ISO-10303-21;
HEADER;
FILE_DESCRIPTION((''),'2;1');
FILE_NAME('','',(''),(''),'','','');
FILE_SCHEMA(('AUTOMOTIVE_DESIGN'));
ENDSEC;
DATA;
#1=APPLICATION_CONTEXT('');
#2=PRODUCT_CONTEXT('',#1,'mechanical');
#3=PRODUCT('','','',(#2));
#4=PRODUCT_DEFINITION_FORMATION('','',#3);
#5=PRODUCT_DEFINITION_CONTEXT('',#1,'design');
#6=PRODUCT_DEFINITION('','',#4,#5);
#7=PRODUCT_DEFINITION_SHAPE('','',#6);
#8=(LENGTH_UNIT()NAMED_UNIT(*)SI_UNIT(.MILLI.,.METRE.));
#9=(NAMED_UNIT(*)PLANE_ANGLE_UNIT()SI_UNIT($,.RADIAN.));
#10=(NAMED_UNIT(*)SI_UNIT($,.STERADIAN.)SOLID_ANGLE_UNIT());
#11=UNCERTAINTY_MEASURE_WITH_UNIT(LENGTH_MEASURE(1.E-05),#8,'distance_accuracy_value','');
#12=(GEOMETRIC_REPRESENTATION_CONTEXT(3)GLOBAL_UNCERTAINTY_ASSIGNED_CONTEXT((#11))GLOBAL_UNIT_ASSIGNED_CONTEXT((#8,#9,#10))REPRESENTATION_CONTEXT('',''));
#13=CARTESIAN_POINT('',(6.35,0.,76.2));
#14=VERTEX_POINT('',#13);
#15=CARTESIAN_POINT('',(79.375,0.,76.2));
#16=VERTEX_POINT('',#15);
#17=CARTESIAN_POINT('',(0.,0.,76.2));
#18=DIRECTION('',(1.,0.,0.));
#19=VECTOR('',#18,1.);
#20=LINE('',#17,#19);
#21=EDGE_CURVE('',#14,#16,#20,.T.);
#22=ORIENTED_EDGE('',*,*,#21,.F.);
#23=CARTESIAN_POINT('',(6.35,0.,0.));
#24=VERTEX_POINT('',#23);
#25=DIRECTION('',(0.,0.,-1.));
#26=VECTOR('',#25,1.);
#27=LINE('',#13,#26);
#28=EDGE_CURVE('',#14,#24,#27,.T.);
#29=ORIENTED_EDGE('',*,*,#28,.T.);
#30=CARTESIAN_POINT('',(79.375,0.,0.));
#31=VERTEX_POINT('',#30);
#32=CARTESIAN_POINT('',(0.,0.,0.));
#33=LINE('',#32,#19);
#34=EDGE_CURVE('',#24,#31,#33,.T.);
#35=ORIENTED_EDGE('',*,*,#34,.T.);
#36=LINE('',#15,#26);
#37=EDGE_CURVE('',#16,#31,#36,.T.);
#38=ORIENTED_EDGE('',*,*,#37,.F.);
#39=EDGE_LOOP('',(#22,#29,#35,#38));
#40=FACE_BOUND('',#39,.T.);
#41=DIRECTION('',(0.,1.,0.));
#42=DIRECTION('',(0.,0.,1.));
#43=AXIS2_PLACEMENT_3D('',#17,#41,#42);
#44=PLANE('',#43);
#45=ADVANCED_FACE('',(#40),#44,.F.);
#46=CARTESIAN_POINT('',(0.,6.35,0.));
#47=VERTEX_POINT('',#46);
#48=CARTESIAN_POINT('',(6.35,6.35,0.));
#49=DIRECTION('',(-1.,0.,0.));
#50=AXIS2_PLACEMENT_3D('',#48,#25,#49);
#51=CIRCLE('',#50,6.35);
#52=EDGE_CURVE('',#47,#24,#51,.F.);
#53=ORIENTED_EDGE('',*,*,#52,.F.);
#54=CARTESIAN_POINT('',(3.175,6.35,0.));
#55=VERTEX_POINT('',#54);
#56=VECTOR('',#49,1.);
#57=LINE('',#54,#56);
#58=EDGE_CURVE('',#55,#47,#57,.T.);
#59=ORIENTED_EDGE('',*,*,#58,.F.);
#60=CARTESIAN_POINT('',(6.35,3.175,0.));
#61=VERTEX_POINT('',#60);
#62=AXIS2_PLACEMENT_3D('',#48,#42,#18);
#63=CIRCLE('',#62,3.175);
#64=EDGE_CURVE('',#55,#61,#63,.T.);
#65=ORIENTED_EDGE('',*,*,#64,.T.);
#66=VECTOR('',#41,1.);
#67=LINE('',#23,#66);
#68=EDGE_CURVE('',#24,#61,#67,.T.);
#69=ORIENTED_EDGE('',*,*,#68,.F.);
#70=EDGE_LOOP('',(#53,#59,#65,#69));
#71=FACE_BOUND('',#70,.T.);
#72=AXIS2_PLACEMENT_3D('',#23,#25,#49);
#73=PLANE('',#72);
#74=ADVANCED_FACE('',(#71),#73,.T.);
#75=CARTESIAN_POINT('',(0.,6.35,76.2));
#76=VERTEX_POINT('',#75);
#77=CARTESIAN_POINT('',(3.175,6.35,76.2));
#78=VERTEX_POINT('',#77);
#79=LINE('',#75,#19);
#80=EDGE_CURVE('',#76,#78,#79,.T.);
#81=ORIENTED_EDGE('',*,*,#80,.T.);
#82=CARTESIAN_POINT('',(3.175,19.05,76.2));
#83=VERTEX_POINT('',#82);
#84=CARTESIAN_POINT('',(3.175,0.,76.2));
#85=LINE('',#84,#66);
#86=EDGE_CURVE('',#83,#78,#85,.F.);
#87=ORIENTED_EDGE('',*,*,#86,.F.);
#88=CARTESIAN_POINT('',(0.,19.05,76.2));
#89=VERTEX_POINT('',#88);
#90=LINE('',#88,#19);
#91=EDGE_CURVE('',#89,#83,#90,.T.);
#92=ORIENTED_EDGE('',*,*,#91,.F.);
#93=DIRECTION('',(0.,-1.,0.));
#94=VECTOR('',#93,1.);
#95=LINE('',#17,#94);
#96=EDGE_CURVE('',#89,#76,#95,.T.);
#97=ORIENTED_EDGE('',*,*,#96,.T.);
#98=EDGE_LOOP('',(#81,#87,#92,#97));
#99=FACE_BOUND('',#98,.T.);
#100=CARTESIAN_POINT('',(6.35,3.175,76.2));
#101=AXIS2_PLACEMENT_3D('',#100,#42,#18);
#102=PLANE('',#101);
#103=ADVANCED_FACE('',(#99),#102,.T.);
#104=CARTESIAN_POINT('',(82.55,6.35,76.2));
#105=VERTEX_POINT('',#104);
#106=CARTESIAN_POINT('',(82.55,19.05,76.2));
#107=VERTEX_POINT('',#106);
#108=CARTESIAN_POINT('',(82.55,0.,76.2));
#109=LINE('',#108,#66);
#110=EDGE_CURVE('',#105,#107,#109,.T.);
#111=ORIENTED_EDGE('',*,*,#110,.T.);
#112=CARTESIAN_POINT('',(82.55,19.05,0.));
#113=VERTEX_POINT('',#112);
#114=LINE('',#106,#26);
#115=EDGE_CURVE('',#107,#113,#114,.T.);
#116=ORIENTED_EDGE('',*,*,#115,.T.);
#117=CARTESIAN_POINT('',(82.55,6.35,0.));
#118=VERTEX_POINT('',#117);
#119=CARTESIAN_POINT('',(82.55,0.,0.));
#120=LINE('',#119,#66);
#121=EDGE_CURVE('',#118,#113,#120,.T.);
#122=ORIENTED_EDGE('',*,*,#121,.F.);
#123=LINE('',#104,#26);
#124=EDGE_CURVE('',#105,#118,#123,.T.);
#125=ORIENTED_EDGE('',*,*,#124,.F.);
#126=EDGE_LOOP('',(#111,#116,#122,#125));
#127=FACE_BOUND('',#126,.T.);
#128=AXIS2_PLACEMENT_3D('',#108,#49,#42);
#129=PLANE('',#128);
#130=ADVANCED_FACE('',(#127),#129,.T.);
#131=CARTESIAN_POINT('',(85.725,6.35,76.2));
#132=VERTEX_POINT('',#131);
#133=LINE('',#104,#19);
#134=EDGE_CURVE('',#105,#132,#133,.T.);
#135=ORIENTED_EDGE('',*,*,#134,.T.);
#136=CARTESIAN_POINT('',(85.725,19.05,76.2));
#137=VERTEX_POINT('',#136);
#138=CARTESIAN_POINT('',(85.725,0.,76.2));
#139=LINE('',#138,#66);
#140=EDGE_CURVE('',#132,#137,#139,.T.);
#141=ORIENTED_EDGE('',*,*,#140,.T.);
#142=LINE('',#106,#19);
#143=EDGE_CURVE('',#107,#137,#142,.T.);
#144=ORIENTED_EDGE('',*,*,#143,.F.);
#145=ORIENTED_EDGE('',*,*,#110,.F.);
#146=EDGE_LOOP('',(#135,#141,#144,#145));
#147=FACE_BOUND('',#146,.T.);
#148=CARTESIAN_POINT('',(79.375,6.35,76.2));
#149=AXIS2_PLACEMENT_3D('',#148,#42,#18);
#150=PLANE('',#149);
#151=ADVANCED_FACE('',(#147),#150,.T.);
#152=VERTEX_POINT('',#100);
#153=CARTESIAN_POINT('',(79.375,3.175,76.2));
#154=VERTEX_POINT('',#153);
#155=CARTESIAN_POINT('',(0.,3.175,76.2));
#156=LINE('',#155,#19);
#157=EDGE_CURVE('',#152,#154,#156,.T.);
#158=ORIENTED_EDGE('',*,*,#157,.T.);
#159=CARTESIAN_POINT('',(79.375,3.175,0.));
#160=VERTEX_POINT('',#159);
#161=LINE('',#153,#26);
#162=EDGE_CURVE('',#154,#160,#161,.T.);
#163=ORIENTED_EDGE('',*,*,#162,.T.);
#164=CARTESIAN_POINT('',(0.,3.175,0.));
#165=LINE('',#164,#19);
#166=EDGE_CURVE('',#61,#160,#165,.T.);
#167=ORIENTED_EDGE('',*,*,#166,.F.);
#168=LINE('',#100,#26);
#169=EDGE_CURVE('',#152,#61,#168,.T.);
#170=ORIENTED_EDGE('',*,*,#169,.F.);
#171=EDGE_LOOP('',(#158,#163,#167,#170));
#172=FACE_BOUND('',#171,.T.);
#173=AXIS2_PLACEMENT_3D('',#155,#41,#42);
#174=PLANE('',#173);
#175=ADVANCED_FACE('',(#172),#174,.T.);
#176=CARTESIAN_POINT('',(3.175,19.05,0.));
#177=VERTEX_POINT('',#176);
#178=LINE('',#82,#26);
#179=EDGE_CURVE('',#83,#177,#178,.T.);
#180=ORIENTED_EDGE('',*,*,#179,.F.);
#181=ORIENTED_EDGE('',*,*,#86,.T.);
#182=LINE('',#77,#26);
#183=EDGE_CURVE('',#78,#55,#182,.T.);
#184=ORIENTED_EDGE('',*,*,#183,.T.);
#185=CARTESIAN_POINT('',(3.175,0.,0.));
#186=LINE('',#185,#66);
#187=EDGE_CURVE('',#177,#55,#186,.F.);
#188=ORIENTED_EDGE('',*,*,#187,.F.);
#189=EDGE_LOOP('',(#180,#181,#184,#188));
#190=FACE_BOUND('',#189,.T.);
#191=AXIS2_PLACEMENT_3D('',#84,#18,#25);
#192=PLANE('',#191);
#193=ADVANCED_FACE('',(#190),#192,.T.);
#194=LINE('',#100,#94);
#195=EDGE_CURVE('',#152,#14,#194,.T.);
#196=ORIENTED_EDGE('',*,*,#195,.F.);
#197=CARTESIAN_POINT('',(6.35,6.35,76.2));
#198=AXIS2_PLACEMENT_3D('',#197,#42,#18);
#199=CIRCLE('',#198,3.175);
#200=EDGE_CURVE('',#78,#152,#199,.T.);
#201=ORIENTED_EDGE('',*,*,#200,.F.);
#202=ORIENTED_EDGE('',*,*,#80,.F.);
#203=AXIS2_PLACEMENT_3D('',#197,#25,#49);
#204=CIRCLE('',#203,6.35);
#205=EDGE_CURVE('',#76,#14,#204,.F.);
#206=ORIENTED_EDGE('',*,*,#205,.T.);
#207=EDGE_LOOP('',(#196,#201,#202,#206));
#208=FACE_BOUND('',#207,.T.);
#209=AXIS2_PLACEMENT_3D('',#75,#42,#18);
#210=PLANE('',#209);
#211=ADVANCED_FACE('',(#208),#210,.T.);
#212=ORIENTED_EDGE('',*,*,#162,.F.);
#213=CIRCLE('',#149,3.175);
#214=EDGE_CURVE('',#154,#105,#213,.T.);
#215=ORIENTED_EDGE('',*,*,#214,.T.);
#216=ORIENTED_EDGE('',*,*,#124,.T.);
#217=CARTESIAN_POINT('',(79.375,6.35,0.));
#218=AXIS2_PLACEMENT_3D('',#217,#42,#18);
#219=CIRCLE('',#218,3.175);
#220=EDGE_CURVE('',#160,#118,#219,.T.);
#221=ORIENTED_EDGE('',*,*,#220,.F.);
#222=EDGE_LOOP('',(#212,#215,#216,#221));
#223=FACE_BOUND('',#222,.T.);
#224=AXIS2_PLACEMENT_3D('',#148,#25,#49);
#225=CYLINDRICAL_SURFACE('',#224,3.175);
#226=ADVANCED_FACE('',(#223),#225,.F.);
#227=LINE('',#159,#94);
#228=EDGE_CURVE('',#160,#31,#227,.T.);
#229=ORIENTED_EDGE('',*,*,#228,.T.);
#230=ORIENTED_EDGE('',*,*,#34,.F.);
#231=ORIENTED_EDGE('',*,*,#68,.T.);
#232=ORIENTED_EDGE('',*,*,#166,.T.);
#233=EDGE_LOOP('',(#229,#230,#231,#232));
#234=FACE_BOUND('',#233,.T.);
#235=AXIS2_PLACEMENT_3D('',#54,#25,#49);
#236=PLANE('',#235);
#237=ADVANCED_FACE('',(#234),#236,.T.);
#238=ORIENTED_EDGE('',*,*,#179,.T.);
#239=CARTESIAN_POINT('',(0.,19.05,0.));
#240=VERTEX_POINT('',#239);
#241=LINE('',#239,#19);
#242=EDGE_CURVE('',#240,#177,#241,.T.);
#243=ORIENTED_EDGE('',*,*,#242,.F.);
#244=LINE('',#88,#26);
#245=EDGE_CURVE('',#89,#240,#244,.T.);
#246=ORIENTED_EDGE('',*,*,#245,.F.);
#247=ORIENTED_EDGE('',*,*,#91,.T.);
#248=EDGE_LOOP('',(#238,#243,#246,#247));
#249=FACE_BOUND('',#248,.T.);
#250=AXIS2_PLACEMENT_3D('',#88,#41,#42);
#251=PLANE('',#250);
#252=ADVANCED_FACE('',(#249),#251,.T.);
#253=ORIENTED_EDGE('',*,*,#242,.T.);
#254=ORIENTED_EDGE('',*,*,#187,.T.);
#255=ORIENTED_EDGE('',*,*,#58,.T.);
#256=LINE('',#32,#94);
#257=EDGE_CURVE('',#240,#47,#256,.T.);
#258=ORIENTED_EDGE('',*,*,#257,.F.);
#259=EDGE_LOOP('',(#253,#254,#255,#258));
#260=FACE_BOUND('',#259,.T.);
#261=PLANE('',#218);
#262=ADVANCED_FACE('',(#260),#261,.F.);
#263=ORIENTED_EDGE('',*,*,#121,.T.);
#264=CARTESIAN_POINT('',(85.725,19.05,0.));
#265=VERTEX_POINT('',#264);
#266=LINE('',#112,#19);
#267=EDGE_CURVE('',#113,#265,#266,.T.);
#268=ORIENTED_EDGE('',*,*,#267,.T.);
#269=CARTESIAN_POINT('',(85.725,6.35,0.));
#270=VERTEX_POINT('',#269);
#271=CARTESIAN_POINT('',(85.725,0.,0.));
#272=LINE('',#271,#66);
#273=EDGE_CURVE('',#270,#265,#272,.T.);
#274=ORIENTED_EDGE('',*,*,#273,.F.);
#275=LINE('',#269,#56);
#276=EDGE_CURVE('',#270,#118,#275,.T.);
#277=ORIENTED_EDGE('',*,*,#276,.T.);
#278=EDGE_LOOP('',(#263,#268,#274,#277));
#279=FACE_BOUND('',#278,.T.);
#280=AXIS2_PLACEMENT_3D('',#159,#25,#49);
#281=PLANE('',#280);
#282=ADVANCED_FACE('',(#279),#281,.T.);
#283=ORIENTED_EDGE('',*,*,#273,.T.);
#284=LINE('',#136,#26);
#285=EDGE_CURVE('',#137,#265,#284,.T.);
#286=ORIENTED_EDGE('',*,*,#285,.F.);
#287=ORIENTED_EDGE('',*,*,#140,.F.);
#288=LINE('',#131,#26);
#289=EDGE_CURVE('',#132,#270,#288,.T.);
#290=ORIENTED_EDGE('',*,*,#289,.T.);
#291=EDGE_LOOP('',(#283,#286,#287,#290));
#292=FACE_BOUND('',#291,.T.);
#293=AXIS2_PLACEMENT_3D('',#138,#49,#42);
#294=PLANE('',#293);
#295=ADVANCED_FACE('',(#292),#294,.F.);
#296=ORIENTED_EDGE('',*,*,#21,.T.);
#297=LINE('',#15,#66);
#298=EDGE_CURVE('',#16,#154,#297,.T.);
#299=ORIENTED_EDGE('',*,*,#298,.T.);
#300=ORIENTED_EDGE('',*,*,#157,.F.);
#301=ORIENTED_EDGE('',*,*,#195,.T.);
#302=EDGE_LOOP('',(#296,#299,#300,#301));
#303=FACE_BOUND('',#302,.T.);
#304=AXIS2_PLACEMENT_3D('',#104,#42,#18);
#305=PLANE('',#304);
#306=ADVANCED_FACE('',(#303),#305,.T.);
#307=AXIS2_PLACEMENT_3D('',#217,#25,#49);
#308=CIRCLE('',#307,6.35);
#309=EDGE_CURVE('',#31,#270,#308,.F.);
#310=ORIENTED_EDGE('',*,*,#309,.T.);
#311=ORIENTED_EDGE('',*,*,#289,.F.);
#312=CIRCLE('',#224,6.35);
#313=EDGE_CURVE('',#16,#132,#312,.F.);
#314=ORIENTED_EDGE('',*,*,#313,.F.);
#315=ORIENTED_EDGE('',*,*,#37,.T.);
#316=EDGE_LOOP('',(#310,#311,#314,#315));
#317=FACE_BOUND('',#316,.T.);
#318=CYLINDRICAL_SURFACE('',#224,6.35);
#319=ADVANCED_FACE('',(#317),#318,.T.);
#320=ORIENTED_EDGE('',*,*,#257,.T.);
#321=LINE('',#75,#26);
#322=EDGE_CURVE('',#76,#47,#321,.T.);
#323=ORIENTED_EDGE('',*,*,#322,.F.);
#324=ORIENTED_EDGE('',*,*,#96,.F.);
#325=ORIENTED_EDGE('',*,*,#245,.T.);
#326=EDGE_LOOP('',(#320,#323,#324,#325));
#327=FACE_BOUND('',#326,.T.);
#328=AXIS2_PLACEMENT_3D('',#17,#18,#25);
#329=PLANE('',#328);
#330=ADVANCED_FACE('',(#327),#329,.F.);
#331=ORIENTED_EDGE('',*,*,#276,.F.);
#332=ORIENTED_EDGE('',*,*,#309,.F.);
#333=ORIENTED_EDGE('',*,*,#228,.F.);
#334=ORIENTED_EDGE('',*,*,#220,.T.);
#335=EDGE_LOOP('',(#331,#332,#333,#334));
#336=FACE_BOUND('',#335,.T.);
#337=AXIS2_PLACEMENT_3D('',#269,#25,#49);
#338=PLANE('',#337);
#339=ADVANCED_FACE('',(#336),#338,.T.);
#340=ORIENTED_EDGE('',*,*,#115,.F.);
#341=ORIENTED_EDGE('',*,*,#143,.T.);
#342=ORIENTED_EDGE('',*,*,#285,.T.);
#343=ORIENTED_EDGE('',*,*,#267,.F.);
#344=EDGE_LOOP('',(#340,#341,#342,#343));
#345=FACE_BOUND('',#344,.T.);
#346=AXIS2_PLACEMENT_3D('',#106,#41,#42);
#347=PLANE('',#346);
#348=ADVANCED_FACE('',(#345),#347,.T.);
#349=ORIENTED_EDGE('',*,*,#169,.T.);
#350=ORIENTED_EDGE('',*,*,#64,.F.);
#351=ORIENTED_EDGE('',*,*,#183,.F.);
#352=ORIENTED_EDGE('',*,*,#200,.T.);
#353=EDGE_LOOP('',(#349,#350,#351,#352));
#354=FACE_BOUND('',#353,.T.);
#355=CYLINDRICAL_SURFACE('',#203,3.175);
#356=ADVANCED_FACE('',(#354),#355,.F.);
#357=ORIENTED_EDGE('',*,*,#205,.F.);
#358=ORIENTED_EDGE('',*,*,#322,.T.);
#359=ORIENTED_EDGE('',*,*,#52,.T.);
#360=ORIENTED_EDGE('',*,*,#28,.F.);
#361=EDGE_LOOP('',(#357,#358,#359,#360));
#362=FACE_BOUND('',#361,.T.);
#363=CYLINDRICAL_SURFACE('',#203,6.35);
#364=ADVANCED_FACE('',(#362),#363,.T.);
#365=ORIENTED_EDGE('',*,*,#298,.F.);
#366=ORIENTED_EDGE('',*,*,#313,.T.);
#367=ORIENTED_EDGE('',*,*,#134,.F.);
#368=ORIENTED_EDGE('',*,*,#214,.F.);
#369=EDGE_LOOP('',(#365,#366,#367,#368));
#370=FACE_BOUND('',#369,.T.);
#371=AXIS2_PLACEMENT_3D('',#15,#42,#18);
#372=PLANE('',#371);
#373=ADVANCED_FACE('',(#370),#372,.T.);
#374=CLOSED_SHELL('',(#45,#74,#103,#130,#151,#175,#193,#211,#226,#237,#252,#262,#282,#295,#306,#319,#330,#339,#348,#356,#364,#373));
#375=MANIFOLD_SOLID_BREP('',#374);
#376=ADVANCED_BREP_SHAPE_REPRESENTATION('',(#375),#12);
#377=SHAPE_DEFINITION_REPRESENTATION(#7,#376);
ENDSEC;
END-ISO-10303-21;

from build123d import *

# Parameters (mm, degrees)
BASE_FLANGE1_DEPTH = 76.2


# Sheet-metal steps are written as plain solids
with BuildPart() as part:
    # Sketch1 → Base-Flange1 (new body)
    with BuildSketch(Plane.XY):
        with BuildLine():
            Line((85.725, 19.05), (85.725, 6.35))
            ThreePointArc((85.725, 6.35), (83.865128061, 1.859871939), (79.375, 0))
            Line((79.375, 0), (6.35, 0))
            ThreePointArc((6.35, 0), (1.859871939, 1.859871939), (0, 6.35))
            Line((0, 6.35), (0, 19.05))
            Line((0, 19.05), (3.175, 19.05))
            Line((3.175, 19.05), (3.175, 6.35))
            ThreePointArc((3.175, 6.35), (4.10493597, 4.10493597), (6.35, 3.175))
            Line((6.35, 3.175), (79.375, 3.175))
            ThreePointArc((79.375, 3.175), (81.62006403, 4.10493597), (82.55, 6.35))
            Line((82.55, 6.35), (82.55, 19.05))
            Line((82.55, 19.05), (85.725, 19.05))
        make_face()
    extrude(amount=BASE_FLANGE1_DEPTH)


solid = part.part
